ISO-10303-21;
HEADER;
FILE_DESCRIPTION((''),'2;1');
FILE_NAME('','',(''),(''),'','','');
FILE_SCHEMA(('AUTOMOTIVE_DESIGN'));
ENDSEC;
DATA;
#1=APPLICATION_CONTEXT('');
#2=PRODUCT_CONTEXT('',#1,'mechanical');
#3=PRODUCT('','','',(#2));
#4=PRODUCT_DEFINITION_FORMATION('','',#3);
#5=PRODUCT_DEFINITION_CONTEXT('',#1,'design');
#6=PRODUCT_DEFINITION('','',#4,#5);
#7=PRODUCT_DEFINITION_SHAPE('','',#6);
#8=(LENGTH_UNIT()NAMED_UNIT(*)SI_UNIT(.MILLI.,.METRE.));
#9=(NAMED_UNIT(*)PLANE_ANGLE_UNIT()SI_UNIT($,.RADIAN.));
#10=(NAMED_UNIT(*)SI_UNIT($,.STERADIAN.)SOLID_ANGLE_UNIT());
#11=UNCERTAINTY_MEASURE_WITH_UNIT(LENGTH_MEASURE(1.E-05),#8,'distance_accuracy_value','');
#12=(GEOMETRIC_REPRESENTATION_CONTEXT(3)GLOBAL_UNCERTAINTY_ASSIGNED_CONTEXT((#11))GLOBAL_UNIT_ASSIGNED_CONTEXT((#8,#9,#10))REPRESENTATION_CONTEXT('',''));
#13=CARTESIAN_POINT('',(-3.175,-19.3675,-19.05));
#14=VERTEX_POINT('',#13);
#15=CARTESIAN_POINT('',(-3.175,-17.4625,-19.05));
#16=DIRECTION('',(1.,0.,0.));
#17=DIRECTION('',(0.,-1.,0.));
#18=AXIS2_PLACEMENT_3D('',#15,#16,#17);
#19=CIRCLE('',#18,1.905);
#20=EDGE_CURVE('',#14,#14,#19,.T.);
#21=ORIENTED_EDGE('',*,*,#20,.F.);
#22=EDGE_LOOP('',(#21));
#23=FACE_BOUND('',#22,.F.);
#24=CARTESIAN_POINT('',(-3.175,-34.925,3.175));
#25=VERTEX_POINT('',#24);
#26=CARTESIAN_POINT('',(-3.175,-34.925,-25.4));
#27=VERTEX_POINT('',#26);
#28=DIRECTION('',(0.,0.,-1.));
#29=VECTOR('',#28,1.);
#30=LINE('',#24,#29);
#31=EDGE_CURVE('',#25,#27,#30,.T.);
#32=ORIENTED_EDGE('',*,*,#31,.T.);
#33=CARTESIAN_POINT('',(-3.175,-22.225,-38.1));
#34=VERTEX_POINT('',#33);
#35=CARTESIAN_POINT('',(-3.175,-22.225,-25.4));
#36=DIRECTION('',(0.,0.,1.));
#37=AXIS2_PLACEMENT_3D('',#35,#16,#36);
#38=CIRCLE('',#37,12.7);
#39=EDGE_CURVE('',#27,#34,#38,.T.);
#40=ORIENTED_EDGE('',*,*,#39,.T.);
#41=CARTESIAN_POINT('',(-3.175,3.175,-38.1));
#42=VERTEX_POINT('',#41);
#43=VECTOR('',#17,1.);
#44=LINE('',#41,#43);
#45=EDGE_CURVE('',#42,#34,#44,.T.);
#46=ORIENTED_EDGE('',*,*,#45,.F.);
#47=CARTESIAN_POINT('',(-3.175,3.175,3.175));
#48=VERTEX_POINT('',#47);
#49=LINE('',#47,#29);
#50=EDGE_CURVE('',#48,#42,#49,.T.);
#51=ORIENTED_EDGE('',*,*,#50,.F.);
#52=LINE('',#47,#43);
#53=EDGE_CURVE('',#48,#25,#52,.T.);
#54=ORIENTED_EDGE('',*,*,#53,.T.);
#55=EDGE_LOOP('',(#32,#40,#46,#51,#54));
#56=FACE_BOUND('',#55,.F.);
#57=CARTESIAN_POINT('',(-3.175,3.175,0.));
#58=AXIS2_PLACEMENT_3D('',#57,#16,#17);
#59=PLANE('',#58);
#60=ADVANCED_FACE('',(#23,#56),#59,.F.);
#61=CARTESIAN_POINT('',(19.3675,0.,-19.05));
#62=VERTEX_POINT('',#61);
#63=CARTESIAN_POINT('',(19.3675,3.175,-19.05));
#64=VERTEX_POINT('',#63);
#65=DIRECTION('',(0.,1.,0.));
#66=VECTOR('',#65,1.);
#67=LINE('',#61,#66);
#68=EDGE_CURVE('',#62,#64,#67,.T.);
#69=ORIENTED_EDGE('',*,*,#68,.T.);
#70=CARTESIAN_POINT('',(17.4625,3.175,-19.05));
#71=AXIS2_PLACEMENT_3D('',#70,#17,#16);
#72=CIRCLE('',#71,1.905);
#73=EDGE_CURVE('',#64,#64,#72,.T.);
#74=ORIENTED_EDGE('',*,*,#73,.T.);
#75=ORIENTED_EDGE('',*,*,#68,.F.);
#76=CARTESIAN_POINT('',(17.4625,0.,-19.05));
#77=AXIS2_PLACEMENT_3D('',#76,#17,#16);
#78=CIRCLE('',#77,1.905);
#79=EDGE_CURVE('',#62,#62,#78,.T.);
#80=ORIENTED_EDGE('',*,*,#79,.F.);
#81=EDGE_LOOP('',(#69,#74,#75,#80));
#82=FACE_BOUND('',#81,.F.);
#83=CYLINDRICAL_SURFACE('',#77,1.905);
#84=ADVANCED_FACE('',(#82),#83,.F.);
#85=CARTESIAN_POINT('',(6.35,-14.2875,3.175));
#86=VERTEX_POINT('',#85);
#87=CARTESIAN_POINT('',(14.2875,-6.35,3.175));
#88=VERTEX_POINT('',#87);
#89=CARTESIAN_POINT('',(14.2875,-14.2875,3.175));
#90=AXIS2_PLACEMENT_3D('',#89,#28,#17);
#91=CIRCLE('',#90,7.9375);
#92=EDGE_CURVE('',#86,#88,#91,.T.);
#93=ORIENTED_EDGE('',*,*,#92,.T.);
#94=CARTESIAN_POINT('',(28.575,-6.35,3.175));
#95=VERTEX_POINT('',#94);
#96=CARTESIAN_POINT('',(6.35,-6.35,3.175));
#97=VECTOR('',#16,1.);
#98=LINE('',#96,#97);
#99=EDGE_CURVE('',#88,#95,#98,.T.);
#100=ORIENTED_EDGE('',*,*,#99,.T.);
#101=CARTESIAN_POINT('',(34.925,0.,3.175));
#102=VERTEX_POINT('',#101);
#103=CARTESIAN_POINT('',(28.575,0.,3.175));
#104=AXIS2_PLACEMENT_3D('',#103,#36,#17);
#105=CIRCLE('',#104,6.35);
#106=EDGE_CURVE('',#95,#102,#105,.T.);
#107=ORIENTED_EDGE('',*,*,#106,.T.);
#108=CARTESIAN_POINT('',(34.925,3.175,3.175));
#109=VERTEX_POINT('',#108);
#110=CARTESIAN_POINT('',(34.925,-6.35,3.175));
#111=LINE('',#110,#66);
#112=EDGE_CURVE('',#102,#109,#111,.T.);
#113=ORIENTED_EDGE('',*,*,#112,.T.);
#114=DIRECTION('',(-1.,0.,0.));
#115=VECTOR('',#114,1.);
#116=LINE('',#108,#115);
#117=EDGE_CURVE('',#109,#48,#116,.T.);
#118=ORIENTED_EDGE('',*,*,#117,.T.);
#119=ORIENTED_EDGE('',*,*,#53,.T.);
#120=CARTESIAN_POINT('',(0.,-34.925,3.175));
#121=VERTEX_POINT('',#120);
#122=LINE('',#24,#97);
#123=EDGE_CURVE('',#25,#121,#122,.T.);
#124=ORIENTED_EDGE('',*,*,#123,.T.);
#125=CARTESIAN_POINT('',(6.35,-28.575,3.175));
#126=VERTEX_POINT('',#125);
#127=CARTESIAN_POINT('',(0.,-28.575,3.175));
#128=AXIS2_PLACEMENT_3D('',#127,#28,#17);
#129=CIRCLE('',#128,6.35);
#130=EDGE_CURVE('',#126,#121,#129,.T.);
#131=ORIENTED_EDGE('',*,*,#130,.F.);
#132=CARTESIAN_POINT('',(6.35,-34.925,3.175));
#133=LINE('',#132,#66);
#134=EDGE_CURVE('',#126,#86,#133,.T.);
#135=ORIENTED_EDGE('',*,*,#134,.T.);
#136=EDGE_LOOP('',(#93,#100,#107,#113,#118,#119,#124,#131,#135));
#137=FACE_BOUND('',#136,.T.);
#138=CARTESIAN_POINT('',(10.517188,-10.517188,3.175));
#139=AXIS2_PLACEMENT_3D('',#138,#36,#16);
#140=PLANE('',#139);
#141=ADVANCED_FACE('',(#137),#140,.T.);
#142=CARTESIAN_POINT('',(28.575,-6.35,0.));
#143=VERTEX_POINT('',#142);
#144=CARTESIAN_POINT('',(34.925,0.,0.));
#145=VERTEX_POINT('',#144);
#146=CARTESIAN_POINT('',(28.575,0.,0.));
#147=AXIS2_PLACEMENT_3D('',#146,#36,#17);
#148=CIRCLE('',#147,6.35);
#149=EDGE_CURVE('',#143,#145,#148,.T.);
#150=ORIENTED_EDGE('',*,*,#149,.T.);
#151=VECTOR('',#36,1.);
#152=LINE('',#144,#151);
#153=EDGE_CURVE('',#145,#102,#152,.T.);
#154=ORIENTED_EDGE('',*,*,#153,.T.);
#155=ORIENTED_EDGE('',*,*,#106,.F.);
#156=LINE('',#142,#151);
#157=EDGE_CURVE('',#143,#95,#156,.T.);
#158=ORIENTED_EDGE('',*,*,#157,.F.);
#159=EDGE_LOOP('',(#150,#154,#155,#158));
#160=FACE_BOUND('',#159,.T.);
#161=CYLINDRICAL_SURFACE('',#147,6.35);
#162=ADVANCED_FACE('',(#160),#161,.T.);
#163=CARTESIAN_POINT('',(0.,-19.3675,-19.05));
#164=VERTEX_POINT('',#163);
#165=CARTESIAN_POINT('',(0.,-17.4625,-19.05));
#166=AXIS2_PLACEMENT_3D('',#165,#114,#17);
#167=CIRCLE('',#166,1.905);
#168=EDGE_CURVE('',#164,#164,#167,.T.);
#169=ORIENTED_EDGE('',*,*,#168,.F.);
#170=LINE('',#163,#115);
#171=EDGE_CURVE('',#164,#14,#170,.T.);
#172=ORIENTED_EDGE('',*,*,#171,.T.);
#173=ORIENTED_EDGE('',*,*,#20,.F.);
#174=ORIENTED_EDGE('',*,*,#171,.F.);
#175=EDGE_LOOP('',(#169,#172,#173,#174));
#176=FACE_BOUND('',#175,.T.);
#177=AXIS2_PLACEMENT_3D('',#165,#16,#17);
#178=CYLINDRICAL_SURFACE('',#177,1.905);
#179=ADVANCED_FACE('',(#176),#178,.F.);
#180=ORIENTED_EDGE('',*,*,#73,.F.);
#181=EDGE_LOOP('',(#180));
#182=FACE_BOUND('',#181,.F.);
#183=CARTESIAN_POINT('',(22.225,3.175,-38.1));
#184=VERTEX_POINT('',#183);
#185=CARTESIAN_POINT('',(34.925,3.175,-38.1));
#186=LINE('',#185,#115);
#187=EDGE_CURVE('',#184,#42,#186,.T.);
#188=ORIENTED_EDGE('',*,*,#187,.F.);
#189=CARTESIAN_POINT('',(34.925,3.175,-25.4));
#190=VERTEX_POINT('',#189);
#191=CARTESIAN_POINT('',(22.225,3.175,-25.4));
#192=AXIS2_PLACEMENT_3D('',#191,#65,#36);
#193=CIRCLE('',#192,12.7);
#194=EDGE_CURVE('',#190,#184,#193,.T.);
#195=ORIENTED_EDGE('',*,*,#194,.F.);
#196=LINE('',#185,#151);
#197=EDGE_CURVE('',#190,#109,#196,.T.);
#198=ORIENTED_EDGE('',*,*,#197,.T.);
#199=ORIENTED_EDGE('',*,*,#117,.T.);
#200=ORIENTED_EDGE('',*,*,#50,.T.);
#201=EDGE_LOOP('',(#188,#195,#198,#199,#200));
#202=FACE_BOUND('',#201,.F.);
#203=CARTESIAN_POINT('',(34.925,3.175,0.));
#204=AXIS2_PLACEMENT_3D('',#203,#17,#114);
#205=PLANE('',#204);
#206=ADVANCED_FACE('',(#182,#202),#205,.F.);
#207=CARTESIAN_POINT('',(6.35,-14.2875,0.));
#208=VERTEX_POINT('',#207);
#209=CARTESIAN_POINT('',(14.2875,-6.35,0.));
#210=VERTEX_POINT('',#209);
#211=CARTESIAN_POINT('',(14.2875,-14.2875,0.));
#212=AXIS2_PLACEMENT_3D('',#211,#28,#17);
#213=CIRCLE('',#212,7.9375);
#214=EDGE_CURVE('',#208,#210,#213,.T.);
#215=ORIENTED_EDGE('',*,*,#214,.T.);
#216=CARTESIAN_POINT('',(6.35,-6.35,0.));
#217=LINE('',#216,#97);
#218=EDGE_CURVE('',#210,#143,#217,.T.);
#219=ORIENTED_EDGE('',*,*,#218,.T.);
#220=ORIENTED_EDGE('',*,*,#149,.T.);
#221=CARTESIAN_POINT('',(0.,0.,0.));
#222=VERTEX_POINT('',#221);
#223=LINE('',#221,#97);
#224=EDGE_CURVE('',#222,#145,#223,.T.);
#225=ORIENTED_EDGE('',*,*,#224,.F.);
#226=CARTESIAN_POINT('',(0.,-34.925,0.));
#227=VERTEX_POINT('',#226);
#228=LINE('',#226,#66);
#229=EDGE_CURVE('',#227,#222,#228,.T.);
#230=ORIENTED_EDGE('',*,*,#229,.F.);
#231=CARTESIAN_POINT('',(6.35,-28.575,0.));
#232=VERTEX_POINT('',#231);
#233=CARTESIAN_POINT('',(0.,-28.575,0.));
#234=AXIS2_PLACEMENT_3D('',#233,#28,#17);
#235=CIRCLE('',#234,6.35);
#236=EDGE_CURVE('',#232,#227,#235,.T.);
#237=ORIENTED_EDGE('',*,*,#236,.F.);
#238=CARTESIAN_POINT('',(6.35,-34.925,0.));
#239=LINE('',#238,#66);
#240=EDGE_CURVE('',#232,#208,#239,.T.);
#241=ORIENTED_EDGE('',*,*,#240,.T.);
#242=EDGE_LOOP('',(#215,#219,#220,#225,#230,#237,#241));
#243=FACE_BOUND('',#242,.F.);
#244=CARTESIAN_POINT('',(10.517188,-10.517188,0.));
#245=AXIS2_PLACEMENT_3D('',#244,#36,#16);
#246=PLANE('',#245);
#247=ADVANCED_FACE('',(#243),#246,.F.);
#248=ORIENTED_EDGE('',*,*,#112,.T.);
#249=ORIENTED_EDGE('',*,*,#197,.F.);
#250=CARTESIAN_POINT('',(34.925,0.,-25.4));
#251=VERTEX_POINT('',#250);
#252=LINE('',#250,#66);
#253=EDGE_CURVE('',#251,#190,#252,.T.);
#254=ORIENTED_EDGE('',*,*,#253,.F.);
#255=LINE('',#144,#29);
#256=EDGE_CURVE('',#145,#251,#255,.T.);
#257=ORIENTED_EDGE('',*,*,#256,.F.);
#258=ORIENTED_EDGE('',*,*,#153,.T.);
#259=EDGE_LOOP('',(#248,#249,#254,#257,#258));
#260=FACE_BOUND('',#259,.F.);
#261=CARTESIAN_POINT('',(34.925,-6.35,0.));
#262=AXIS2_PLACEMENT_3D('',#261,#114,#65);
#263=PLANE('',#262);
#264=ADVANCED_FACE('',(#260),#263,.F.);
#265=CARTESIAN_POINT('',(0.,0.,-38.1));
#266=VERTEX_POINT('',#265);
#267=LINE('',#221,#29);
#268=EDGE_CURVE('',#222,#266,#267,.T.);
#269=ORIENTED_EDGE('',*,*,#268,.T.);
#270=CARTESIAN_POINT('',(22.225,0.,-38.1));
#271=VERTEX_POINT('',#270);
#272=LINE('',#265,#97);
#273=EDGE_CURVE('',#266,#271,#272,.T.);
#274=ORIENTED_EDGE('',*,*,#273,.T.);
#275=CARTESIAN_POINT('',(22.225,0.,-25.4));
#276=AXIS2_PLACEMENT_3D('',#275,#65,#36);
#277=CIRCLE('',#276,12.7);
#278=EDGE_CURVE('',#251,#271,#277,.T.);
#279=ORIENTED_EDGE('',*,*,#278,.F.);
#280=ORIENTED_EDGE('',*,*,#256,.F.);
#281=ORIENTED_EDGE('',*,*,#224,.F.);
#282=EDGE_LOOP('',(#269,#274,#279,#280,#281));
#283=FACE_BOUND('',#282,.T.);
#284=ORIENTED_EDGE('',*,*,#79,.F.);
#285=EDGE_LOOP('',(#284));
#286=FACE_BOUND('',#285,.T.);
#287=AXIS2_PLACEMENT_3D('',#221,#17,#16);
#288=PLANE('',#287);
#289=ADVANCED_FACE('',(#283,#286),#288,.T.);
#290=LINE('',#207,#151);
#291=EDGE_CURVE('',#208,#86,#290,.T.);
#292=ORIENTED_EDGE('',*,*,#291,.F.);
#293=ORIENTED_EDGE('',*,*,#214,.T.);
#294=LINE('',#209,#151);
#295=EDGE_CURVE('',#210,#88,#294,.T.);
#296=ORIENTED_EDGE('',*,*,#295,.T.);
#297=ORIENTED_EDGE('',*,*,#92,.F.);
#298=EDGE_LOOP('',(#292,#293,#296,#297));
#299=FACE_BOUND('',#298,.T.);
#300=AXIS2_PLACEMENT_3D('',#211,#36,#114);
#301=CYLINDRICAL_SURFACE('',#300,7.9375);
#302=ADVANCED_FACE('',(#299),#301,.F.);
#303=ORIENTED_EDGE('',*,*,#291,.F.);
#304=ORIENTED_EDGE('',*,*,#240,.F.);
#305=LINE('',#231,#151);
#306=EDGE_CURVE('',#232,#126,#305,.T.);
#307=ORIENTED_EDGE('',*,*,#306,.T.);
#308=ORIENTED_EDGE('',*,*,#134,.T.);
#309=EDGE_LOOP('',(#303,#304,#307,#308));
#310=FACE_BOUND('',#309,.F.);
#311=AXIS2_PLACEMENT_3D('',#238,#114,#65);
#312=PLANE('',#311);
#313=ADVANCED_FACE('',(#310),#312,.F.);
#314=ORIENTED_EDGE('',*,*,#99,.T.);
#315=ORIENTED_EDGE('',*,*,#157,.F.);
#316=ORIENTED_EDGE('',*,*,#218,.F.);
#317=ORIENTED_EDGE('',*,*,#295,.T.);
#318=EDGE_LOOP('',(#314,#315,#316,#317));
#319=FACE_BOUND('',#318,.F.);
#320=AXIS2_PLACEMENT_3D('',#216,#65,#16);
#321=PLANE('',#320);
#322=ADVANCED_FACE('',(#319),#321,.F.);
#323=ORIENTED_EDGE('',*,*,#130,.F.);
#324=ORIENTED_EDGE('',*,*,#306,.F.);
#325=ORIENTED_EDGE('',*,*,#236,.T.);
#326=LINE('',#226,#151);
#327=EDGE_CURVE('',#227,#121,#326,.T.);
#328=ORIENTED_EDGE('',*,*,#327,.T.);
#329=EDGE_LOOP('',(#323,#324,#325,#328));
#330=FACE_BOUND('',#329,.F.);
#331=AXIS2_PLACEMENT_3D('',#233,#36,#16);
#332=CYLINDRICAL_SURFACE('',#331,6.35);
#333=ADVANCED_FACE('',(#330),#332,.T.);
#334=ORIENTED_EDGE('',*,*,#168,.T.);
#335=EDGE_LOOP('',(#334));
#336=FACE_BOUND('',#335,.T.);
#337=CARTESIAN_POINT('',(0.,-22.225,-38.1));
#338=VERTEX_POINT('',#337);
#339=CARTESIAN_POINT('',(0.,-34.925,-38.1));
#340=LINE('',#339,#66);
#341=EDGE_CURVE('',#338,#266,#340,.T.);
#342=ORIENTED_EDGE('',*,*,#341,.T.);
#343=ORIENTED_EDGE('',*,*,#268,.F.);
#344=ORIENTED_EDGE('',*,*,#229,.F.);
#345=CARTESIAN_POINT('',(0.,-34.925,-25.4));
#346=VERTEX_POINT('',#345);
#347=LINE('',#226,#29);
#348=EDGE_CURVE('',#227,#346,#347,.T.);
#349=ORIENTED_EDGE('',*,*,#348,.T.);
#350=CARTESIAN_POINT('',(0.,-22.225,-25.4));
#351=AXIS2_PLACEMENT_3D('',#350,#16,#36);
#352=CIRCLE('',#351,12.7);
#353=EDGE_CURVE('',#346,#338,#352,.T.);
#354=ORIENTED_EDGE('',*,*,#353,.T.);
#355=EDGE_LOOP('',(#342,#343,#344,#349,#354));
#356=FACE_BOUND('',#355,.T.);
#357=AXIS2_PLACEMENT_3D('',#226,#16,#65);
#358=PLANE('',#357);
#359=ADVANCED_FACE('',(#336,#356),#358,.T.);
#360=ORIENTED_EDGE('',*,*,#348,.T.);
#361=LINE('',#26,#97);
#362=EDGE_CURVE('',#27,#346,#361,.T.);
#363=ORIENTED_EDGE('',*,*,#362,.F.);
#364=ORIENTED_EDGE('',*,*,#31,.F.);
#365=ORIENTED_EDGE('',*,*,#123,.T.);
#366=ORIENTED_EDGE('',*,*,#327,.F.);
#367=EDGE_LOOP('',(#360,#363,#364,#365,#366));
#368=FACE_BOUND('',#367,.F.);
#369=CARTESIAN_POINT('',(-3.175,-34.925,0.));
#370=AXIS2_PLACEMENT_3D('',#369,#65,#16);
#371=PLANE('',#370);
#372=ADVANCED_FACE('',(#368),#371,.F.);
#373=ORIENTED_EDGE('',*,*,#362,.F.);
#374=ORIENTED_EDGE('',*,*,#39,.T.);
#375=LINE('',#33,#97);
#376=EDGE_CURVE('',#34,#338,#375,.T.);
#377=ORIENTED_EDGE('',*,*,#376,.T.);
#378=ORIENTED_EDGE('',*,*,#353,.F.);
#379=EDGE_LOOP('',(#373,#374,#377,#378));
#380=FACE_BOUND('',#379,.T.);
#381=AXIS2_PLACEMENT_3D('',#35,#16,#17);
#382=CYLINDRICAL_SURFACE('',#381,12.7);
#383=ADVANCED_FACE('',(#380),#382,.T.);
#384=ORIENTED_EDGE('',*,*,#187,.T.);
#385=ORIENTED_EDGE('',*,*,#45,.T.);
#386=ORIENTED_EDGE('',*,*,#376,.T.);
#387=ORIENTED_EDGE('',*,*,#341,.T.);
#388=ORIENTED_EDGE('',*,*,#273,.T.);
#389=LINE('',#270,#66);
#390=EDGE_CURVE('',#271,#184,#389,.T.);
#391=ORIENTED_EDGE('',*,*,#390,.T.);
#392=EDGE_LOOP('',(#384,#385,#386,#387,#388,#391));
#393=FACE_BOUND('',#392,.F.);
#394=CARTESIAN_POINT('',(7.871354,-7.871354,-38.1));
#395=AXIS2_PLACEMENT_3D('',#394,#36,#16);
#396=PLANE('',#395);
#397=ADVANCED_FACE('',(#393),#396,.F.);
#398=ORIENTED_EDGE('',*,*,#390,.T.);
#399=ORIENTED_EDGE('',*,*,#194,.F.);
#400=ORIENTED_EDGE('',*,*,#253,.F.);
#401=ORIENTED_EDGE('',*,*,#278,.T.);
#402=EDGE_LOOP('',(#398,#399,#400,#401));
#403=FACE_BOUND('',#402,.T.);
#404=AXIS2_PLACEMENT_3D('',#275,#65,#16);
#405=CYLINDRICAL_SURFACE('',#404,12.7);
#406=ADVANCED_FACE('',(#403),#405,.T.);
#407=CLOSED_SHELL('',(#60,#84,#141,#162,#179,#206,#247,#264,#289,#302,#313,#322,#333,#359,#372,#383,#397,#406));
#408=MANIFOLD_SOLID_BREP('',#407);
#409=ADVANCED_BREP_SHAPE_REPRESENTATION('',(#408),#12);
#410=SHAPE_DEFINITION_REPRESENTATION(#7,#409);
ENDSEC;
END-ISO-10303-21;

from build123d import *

# Parameters (mm, degrees)
F1_DEPTH  = 38.1
F3_DEPTH  = 3.175
F4_R      = 7.9375
F5_R      = 6.35
F9_R      = 12.7
F10_R     = 1.905
F11_DEPTH = 3.176


# Not quite as in the source:
# - a pattern or mirror of a feature is missing from the dataset's text; its kind, count and spacing are read off the source's solid


with BuildPart() as f1:
    # F0 (on Top) → F1 (new body)
    with BuildSketch(Plane.XY):
        Polygon((0, -34.925), (0, 0), (34.925, 0), (34.925, 3.175), (-3.175, 3.175), (-3.175, -34.925), align=None)
    extrude(amount=-F1_DEPTH)

    # F2 (on face) → F3 (join)
    with BuildSketch(Plane.XY):
        Polygon((6.35, -34.925), (6.35, -6.35), (34.925, -6.35), (34.925, 3.175), (-3.175, 3.175), (-3.175, -34.925), align=None)
    extrude(amount=F3_DEPTH)

    # F4
    f4_edges = [f1.edges().sort_by_distance(p)[0] for p in [
        (6.35, -6.35, 1.5875),
    ]]
    fillet(f4_edges, radius=F4_R)

    # F5
    f5_edges = [f1.edges().sort_by_distance(p)[0] for p in [
        (6.35, -34.925, 1.5875),
        (34.925, -6.35, 1.5875),
    ]]
    fillet(f5_edges, radius=F5_R)

    # F9
    f9_edges = [f1.edges().sort_by_distance(p)[0] for p in [
        (34.925, 1.5875, -38.1),
        (-1.5875, -34.925, -38.1),
    ]]
    fillet(f9_edges, radius=F9_R)

    # F10 (on face) → F11 (cut, through all)
    with BuildSketch(Plane.XZ):
        with Locations((17.4625, -19.05)):
            Circle(F10_R)
    f11 = extrude(amount=-F11_DEPTH, mode=Mode.SUBTRACT)

    # F11_copies: F11 across plane
    add(f11.mirror(Plane(origin=(0, 0, 0), x_dir=(0.7071067812, -0.7071067812, 0), z_dir=(-0.7071067812, -0.7071067812, 0))), mode=Mode.SUBTRACT)


solid = f1.part
